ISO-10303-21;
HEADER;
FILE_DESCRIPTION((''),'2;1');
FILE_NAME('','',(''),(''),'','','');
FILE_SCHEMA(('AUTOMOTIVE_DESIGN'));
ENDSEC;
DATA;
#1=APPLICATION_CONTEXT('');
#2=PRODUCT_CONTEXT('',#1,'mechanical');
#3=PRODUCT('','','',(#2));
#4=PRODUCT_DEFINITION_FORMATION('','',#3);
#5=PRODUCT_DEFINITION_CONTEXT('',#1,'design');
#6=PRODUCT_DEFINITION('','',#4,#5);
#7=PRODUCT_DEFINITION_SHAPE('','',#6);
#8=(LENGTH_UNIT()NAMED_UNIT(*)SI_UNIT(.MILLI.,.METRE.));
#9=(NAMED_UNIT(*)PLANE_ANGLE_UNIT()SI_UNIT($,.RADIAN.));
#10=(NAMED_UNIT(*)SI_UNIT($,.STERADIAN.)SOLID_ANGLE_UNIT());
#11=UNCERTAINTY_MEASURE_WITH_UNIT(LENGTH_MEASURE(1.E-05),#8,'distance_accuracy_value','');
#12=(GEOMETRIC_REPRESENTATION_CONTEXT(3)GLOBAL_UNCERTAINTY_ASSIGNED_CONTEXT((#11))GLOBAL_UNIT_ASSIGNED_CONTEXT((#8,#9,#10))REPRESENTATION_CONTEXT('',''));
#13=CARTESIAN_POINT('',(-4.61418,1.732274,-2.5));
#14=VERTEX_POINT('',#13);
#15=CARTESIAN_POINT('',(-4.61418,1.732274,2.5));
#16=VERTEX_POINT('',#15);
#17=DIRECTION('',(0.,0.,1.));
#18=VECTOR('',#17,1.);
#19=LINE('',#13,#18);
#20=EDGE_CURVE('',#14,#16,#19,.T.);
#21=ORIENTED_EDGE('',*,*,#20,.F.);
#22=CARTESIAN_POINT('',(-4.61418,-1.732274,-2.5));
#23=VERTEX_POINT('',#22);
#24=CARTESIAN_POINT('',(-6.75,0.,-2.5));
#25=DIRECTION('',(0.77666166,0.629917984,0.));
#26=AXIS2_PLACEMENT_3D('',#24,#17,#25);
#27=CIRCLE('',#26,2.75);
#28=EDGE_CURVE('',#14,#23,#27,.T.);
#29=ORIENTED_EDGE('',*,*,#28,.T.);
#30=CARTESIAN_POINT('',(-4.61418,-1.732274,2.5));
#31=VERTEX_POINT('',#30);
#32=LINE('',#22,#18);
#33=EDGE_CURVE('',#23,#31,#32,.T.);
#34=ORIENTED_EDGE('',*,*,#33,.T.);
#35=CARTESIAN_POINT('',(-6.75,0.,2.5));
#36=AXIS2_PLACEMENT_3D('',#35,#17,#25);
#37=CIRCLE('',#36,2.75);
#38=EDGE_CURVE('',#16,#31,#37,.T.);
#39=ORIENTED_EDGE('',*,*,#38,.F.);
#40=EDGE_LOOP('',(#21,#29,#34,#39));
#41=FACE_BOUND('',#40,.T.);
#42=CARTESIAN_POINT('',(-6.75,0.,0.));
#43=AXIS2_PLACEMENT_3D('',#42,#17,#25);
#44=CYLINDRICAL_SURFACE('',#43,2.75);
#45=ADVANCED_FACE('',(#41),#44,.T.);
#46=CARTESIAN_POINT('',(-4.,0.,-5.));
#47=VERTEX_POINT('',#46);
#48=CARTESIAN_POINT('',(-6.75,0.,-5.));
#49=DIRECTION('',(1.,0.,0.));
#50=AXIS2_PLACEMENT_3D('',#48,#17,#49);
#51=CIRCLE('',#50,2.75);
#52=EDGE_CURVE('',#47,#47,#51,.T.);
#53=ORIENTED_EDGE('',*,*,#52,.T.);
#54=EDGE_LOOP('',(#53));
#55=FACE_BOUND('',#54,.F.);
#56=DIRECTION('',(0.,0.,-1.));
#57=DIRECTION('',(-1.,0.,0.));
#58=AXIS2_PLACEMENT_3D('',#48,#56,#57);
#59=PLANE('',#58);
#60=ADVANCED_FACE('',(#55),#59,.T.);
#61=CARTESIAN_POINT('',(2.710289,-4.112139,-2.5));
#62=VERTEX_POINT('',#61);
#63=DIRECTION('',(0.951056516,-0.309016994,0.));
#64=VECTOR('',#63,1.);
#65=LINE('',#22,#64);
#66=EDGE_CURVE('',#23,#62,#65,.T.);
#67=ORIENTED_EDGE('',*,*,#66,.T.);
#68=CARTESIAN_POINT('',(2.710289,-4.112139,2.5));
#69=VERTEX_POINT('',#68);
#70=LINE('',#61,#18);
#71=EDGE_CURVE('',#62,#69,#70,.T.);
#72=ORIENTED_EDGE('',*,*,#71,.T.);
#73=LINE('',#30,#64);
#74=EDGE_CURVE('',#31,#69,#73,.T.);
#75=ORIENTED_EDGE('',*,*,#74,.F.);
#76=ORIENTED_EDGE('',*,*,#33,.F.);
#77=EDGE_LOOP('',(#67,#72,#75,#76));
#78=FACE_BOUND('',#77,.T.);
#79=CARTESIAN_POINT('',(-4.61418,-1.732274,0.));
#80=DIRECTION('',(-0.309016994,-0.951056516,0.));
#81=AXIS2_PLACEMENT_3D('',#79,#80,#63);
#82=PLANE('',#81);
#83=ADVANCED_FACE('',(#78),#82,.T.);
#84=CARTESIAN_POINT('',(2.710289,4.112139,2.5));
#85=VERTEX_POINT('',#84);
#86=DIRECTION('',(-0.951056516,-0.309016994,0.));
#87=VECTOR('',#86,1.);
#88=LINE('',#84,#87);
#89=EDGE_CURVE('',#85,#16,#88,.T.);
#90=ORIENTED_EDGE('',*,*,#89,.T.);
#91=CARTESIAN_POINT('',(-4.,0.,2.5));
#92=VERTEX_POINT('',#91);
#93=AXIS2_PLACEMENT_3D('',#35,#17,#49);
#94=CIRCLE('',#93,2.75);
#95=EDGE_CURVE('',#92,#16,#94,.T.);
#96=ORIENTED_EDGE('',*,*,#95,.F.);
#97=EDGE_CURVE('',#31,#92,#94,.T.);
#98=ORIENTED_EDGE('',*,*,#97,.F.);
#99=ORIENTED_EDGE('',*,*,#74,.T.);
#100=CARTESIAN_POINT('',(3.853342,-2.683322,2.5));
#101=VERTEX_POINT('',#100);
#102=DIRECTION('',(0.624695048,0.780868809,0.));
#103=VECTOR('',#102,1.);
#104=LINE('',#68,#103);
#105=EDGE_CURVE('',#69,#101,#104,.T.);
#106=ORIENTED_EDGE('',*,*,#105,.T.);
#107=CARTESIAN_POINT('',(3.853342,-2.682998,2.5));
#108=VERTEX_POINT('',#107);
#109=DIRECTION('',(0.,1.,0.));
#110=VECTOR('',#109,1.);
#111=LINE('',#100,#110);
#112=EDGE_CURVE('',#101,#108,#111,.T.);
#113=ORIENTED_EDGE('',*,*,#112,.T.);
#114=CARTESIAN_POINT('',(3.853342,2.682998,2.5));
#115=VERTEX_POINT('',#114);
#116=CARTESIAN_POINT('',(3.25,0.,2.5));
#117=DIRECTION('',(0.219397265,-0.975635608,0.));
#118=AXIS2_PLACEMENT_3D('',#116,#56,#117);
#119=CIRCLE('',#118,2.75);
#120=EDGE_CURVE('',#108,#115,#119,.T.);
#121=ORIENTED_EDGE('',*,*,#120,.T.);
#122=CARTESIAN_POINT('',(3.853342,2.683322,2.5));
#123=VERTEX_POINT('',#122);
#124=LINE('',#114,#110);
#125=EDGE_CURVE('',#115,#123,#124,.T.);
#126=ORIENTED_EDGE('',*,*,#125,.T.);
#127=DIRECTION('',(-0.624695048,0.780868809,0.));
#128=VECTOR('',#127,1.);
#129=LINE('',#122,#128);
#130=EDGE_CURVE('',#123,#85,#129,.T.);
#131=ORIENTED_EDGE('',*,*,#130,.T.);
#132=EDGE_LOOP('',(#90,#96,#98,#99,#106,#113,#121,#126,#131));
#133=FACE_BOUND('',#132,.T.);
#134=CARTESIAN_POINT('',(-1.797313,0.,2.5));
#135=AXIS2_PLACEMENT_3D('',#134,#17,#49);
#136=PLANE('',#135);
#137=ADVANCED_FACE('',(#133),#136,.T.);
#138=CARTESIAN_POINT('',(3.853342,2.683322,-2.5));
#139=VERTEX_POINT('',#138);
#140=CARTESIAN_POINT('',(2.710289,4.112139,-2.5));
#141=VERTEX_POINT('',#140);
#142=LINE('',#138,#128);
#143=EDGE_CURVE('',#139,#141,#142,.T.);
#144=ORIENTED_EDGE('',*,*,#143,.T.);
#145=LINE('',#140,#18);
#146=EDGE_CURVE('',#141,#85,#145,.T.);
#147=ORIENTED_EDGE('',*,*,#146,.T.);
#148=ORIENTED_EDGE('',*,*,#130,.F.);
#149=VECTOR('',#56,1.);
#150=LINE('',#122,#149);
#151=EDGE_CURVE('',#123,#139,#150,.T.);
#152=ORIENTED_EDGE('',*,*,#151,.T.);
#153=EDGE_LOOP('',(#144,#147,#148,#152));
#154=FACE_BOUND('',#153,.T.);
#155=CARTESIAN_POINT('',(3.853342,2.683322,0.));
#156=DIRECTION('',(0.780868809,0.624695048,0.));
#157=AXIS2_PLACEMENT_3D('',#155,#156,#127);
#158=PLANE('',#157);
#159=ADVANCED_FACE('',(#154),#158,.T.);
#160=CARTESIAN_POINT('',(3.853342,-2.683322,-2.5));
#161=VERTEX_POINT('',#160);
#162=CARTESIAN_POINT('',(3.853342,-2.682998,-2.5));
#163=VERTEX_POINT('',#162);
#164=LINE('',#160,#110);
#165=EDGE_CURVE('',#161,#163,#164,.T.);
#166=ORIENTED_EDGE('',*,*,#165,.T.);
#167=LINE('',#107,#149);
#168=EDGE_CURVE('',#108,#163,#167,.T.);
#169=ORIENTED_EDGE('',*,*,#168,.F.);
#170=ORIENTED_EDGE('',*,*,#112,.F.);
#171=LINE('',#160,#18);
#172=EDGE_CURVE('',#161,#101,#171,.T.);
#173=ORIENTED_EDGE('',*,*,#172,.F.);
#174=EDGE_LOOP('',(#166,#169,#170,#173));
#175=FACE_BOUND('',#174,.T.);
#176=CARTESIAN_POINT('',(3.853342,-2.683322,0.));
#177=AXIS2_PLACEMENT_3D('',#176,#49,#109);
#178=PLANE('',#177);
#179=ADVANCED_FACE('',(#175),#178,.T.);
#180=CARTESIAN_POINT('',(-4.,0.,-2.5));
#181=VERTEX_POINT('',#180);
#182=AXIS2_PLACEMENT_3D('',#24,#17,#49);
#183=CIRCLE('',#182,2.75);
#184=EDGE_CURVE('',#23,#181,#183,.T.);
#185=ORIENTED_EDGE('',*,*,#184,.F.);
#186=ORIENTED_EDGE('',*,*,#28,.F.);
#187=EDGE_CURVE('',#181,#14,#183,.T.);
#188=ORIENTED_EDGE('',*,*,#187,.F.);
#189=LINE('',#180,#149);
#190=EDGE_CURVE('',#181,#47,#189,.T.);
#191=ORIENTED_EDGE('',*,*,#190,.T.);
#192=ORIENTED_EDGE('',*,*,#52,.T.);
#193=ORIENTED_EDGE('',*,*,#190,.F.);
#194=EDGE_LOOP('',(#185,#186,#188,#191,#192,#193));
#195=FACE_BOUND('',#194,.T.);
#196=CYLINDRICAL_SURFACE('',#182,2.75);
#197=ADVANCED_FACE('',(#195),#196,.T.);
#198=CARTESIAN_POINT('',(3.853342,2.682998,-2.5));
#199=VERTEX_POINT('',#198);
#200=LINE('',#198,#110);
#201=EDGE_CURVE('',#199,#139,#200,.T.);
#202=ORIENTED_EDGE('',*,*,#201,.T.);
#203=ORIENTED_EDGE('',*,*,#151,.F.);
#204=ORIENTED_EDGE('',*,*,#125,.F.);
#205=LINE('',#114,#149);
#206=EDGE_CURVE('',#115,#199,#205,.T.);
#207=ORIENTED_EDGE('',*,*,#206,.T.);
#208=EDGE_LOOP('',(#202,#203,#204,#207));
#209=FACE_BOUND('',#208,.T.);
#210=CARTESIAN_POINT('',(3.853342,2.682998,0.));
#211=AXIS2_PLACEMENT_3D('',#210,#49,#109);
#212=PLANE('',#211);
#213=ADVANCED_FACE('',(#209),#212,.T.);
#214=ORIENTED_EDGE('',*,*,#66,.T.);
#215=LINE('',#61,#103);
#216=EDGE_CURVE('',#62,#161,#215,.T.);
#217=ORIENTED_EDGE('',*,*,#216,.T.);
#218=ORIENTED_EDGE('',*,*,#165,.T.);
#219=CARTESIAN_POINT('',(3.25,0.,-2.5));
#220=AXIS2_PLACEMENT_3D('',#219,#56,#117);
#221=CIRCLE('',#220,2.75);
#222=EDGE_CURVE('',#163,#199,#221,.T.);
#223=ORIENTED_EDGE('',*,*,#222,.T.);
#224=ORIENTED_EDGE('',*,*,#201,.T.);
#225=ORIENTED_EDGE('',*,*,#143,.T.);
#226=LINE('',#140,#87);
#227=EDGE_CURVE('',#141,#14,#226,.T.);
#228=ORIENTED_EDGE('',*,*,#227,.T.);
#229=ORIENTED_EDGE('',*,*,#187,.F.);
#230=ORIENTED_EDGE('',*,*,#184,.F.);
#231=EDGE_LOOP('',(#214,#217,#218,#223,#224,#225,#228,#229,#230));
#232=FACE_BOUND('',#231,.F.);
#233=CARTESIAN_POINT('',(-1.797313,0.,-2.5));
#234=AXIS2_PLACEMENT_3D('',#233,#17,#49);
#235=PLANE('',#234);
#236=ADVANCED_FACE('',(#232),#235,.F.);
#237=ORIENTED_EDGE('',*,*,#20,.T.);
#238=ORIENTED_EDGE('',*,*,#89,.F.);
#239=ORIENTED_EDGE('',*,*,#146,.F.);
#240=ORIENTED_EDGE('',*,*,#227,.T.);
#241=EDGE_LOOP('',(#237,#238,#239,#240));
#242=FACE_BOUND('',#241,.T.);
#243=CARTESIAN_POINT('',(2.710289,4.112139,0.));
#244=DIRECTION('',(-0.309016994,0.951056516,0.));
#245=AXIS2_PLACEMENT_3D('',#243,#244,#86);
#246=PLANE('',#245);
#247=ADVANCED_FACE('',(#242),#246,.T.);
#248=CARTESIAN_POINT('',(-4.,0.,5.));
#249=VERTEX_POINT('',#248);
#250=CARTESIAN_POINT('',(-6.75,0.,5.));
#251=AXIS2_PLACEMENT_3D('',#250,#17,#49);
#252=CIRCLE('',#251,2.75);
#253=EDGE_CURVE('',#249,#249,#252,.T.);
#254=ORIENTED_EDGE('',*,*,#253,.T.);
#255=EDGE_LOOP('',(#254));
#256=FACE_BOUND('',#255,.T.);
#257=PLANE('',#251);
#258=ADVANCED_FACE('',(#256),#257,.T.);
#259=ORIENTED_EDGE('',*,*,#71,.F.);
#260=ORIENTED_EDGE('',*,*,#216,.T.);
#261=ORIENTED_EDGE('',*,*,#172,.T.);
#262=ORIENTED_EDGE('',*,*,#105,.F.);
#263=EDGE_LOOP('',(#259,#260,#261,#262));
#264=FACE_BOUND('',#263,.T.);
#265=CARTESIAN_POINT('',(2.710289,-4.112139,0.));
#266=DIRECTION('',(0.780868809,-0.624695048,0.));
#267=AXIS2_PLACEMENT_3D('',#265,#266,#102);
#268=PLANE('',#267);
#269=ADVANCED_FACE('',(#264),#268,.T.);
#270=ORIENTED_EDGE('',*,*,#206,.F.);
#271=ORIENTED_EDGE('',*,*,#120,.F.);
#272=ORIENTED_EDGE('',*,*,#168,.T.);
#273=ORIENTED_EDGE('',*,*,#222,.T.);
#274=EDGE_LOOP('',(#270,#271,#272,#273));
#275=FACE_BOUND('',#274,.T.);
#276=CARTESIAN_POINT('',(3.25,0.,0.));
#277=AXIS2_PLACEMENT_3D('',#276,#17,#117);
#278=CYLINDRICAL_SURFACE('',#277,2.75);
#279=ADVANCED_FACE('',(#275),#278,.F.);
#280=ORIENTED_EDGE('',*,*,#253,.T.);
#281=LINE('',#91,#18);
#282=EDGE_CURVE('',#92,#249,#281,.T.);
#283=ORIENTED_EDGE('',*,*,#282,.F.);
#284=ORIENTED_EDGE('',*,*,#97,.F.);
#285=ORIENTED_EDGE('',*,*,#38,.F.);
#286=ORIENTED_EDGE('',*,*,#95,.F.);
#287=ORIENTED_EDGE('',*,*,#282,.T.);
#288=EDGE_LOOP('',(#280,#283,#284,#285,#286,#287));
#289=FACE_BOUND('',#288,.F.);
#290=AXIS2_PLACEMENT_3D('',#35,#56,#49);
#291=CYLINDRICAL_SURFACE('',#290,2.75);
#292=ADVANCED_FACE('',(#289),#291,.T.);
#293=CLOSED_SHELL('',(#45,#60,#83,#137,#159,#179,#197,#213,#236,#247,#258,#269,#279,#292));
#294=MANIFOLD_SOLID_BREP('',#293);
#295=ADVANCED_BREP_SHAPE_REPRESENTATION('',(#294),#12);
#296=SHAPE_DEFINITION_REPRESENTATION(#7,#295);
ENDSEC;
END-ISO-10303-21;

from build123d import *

# Parameters (mm, degrees)
F1_DEPTH = 2.5
F2_R     = 2.75
F3_DEPTH = 2.5


# Not quite as in the source:
# - a pattern or mirror of a feature is missing from the dataset's text; its kind, count and spacing are read off the source's solid


with BuildPart() as f1:
    # F0 (on Top) → F1 (new body, symmetric)
    with BuildSketch(Plane.XY):
        with BuildLine():
            Line((3.853342479, 2.6833219012), (2.7102889432, 4.112138821))
            Line((2.7102889432, 4.112138821), (-4.6141804357, 1.7322744554))
            ThreePointArc((-4.6141804357, 1.7322744554), (-9.5, 0), (-4.6141804357, -1.7322744554))
            Line((-4.6141804357, -1.7322744554), (2.7102889432, -4.112138821))
            Line((2.7102889432, -4.112138821), (3.853342479, -2.6833219012))
            Line((3.853342479, -2.6833219012), (3.853342479, -2.6829979227))
            ThreePointArc((3.853342479, -2.6829979227), (0.5, 0), (3.853342479, 2.6829979227))
            Line((3.853342479, 2.6829979227), (3.853342479, 2.6833219012))
        make_face()
    extrude(amount=F1_DEPTH, both=True)

    # F2 (on face) → F3 (join)
    with BuildSketch(Plane.XY.offset(2.5)):
        with Locations((-6.75, 0)):
            Circle(F2_R)
    f3 = extrude(amount=F3_DEPTH)

    # F3_copies: F3 across plane
    add(f3.mirror(Plane(origin=(0, 0, 0), x_dir=(-1, 0, 0), z_dir=(0, 0, -1))))


solid = f1.part
